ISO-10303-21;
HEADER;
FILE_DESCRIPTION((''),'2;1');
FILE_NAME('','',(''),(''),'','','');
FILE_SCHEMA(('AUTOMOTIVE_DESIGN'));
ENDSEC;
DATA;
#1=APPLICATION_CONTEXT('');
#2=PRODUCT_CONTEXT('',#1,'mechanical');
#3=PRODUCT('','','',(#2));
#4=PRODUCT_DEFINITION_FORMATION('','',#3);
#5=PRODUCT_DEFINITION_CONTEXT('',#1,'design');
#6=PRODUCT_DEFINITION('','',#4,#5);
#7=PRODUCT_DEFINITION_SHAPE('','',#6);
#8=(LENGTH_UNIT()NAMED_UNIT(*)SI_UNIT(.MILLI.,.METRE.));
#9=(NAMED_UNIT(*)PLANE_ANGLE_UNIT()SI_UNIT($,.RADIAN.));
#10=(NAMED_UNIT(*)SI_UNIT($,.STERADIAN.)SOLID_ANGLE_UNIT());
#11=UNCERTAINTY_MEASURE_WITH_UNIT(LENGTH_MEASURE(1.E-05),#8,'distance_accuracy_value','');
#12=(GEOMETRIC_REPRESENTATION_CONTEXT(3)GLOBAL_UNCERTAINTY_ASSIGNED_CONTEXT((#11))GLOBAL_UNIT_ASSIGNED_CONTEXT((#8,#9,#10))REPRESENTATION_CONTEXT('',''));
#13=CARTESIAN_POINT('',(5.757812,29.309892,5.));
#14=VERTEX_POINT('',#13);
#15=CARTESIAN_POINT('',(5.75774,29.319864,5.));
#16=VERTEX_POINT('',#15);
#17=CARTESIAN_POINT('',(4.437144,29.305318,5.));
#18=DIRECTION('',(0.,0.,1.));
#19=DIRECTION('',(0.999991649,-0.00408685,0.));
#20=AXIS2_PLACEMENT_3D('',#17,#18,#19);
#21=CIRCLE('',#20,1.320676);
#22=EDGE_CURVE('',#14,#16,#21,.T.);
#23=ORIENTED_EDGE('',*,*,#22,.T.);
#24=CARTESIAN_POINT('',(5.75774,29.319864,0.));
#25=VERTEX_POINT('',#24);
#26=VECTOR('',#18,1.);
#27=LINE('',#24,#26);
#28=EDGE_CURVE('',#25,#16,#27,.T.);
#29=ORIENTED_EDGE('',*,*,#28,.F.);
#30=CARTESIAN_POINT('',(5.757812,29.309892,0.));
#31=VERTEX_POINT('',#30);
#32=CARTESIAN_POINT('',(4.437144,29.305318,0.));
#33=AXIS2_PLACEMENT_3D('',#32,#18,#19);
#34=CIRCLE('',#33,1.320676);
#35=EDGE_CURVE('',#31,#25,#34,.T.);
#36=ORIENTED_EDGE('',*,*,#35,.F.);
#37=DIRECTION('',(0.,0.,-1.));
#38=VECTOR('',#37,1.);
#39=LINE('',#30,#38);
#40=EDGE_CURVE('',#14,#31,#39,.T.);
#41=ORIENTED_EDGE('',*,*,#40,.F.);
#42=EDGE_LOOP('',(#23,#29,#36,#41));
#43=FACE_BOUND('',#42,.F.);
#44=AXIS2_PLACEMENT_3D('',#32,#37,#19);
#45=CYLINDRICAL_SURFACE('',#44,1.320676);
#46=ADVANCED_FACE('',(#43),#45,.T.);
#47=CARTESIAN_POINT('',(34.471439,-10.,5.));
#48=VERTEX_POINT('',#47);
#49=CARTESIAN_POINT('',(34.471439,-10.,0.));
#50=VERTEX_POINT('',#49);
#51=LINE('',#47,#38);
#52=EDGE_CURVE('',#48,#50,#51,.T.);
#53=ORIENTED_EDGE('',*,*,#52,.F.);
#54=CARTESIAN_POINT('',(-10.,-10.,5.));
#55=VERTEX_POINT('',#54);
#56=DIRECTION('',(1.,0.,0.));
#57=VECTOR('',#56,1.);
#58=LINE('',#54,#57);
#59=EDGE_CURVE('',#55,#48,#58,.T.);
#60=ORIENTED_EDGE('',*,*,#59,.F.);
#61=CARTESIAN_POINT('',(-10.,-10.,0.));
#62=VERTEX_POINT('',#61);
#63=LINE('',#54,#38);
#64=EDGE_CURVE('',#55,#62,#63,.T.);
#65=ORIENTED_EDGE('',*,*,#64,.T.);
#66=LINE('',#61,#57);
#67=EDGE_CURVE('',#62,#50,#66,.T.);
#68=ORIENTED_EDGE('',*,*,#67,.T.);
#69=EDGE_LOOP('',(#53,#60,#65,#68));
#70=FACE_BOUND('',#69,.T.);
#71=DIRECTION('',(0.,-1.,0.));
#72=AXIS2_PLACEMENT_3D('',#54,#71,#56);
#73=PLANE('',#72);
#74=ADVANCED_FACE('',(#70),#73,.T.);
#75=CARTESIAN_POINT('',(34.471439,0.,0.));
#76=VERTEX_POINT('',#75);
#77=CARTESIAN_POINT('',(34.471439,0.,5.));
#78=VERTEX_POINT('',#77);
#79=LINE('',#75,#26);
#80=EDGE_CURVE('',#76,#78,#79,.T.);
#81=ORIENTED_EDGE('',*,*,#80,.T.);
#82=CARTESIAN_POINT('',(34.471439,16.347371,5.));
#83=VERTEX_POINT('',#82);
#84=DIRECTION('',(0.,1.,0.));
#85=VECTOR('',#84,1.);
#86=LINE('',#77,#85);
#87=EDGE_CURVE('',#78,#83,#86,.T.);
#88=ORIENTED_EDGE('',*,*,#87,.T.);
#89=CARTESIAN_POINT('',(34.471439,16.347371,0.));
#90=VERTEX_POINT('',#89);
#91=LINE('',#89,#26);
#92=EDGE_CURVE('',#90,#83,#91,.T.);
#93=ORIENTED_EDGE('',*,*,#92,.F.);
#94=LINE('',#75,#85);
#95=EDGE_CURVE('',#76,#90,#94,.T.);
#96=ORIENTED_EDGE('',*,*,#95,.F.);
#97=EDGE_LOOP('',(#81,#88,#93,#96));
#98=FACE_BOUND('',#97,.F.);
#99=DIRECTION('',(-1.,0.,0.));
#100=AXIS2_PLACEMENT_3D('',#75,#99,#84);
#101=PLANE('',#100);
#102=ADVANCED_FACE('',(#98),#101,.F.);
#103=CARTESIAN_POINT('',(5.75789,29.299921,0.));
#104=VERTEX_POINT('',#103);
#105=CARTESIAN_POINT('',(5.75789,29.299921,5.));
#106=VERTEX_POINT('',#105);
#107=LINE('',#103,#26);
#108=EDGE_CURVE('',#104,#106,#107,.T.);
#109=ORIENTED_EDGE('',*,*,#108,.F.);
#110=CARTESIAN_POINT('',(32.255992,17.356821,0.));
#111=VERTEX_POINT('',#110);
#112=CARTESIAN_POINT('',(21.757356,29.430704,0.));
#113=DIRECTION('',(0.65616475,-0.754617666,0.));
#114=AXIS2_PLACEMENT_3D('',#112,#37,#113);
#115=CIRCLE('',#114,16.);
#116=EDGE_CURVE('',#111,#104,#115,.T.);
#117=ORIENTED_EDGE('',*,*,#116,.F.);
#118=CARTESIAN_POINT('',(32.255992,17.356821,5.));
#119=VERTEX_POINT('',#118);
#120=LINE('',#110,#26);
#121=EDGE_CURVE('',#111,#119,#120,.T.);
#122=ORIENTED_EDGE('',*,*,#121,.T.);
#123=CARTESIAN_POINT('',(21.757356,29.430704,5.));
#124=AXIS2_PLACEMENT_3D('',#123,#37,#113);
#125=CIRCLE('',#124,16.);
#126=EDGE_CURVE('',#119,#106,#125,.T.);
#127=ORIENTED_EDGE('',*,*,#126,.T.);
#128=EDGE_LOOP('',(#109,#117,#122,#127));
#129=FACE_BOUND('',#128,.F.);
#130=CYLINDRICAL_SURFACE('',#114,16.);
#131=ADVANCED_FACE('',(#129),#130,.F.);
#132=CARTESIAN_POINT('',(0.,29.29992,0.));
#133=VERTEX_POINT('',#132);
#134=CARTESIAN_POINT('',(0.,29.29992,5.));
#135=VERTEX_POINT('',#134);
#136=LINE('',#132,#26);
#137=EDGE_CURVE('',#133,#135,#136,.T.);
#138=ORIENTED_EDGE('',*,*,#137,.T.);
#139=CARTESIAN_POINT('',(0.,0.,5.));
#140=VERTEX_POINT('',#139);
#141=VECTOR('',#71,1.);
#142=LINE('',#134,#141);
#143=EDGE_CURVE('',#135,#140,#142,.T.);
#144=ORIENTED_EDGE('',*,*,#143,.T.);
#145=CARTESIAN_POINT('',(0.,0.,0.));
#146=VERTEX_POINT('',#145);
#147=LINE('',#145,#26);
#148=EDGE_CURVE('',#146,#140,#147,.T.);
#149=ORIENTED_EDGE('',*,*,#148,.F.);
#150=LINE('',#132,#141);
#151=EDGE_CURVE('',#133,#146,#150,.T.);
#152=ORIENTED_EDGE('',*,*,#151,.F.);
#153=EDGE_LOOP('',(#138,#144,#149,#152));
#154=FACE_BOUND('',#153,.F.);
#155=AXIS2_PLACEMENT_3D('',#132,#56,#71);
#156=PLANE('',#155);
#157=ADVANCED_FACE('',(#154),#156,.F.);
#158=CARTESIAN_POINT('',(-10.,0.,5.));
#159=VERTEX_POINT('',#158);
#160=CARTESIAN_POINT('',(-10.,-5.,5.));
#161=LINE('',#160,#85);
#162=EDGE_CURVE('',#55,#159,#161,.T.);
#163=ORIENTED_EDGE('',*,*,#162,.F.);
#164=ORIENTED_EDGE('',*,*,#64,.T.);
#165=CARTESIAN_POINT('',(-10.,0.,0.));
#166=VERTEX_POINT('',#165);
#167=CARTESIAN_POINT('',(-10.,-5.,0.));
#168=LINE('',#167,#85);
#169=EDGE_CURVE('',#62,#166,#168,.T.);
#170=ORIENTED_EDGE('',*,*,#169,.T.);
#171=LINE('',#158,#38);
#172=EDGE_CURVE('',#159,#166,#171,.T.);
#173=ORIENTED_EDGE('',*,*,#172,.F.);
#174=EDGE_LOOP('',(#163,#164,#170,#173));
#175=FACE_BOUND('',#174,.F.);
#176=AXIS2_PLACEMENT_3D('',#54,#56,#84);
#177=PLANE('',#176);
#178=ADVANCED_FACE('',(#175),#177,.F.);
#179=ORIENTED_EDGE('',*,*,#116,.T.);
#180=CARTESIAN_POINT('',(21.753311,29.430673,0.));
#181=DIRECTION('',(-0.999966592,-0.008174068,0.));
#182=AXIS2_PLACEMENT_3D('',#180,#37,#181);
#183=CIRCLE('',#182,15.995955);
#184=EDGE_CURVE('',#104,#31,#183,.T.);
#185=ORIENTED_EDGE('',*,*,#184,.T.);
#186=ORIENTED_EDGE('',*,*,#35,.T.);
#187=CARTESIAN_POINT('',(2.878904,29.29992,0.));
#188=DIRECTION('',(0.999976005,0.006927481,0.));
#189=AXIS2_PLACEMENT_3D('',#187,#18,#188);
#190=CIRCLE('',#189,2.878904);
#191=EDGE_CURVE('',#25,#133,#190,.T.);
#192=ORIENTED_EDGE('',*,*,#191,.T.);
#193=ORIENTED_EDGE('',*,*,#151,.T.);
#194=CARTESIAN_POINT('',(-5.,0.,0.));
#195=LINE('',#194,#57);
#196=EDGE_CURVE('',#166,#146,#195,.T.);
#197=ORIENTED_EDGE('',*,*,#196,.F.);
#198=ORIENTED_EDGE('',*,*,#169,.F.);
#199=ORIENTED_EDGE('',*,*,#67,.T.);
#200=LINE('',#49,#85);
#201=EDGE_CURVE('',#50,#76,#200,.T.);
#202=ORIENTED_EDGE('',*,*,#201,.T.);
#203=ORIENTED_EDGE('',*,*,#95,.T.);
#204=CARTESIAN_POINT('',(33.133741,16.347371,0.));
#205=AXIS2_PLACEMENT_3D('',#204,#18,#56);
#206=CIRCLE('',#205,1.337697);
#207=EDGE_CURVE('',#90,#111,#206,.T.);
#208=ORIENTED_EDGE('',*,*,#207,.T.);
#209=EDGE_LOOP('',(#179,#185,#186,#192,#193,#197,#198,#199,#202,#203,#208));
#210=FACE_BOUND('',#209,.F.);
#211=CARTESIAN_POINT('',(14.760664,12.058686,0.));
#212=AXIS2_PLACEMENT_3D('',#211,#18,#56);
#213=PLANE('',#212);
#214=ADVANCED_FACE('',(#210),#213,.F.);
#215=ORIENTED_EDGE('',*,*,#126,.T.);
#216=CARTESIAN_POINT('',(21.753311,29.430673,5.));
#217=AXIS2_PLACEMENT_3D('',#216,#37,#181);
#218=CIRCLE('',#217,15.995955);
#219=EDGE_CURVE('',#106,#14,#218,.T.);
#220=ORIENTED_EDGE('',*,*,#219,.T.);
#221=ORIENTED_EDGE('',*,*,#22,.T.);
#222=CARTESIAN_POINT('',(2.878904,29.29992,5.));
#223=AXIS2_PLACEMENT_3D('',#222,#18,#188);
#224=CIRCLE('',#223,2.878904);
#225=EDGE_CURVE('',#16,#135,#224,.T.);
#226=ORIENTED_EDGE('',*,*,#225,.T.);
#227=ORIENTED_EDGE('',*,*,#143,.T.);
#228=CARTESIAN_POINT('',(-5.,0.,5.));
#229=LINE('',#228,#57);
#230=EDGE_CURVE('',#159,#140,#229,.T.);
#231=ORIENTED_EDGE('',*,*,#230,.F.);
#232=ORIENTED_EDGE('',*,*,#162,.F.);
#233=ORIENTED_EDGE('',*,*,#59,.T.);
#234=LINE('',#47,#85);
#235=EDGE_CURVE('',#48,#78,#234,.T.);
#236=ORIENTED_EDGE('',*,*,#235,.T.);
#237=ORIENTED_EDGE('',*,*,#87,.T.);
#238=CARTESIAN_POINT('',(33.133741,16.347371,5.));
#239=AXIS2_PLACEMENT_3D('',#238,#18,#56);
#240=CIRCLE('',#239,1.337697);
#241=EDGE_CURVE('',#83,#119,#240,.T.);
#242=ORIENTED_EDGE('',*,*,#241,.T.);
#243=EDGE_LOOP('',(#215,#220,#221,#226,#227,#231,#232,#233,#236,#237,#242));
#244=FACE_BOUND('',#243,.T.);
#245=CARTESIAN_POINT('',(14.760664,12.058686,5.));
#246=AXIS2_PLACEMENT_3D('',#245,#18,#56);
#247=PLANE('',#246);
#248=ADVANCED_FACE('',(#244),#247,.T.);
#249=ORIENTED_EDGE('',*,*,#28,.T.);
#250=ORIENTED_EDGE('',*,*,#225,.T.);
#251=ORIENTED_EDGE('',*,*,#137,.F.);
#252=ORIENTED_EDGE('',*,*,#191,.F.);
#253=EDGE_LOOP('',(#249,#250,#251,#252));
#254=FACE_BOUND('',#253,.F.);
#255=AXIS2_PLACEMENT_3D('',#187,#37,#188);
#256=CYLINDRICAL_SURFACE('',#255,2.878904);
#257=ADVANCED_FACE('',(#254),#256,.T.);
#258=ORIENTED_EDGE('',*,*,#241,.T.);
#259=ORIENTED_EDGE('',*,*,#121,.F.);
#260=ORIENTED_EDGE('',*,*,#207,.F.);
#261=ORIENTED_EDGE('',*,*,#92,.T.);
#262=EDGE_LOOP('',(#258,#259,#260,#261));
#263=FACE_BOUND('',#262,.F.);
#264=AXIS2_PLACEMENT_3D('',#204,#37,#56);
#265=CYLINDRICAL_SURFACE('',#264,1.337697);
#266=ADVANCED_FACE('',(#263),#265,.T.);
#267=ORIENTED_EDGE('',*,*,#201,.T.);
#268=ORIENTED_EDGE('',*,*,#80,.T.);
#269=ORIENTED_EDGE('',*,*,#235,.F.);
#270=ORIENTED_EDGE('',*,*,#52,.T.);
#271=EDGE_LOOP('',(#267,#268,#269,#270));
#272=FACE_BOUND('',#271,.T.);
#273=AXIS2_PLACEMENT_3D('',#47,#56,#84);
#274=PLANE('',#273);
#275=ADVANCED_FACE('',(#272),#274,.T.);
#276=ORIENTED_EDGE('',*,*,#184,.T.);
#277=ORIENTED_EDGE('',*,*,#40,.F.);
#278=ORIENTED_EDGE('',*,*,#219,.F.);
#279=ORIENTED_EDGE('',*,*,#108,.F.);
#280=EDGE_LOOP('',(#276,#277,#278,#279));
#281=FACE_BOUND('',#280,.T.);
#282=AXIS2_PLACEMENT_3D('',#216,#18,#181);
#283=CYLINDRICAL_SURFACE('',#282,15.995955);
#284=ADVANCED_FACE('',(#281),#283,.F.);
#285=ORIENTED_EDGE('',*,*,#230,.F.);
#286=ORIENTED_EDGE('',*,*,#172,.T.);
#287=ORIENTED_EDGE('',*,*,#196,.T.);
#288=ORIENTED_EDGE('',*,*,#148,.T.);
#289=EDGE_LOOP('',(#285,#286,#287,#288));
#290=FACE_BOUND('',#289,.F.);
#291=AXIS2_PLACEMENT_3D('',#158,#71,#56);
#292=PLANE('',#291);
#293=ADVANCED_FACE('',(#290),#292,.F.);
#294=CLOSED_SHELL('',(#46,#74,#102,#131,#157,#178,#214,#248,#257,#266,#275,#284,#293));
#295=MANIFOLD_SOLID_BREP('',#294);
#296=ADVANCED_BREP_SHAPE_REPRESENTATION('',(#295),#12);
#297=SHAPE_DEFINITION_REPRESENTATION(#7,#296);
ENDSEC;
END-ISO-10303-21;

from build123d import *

# Parameters (mm, degrees)
F1_DEPTH = 5
F2_W     = 34.4714387385
F2_H     = 10
F2_W_2   = 10
F3_DEPTH = 5


# Not quite as in the source:
# - ends of sketch curves that miss each other by under 0.0002 mm in the source are joined


with BuildPart() as f1:
    # F0 (on Top) → F1 (new body)
    with BuildSketch(Plane.XY):
        with BuildLine():
            Line((0, 29.2999204248), (0, 0))
            Line((0, 0), (34.4714387385, 0))
            Line((34.4714387385, 0), (34.4714387385, 16.3473710418))
            ThreePointArc((34.4714387385, 16.3473710418), (32.5790927131, 15.1300794804), (32.2559916738, 17.3568210333))
            ThreePointArc((32.2559916738, 17.3568210333), (15.182844974, 14.8438668457), (5.7578901922, 29.2999210911))
            ThreePointArc((5.7578901922, 29.2999210911), (2.8789043427, 26.4210160822), (0, 29.2999204248))
        make_face()
        with BuildLine():
            ThreePointArc((5.7577396052, 29.3198639813), (2.8689325046, 32.1788074974), (0, 29.2999204248))
            ThreePointArc((0, 29.2999204248), (2.8789043427, 26.4210160822), (5.7578086853, 29.2999204248))
            ThreePointArc((5.7578086853, 29.2999204248), (5.7578117914, 29.3098925127), (5.7577396052, 29.3198639813))
        make_face()
        with BuildLine():
            ThreePointArc((32.2559916738, 17.3568210333), (32.5790927131, 15.1300794804), (34.4714387385, 16.3473710418))
            ThreePointArc((34.4714387385, 16.3473710418), (33.6883902233, 17.5646626032), (32.2559916738, 17.3568210333))
        make_face()
    extrude(amount=F1_DEPTH)

    # F2 (on face) → F3 (join)
    with BuildSketch(Plane.XY.offset(5)):
        with BuildLine():
            Line((0, 0), (34.4714387385, 0))
            Line((34.4714387385, 0), (34.4714387385, 16.3473710418))
            ThreePointArc((34.4714387385, 16.3473710418), (33.6883902233, 17.5646626032), (32.2559916738, 17.3568210333))
            ThreePointArc((32.2559916738, 17.3568210333), (15.182844974, 14.8438668457), (5.7578901922, 29.2999210911))
            ThreePointArc((5.7578901922, 29.2999210911), (5.757811792, 29.3098923335), (5.7577396052, 29.3198639813))
            ThreePointArc((5.7577396052, 29.3198639813), (2.8689325046, 32.1788074974), (0, 29.2999204248))
            Line((0, 29.2999204248), (0, 25.4882741719))
            Line((0, 25.4882741719), (0, 0))
        make_face()
        with Locations((17.2357193692, -5)):
            Rectangle(F2_W, F2_H)
        with Locations((-5, -5)):
            Rectangle(F2_W_2, F2_H)
        with Locations((-5, -5)):
            Rectangle(F2_W_2, F2_H)
    extrude(amount=-F3_DEPTH)


solid = f1.part
